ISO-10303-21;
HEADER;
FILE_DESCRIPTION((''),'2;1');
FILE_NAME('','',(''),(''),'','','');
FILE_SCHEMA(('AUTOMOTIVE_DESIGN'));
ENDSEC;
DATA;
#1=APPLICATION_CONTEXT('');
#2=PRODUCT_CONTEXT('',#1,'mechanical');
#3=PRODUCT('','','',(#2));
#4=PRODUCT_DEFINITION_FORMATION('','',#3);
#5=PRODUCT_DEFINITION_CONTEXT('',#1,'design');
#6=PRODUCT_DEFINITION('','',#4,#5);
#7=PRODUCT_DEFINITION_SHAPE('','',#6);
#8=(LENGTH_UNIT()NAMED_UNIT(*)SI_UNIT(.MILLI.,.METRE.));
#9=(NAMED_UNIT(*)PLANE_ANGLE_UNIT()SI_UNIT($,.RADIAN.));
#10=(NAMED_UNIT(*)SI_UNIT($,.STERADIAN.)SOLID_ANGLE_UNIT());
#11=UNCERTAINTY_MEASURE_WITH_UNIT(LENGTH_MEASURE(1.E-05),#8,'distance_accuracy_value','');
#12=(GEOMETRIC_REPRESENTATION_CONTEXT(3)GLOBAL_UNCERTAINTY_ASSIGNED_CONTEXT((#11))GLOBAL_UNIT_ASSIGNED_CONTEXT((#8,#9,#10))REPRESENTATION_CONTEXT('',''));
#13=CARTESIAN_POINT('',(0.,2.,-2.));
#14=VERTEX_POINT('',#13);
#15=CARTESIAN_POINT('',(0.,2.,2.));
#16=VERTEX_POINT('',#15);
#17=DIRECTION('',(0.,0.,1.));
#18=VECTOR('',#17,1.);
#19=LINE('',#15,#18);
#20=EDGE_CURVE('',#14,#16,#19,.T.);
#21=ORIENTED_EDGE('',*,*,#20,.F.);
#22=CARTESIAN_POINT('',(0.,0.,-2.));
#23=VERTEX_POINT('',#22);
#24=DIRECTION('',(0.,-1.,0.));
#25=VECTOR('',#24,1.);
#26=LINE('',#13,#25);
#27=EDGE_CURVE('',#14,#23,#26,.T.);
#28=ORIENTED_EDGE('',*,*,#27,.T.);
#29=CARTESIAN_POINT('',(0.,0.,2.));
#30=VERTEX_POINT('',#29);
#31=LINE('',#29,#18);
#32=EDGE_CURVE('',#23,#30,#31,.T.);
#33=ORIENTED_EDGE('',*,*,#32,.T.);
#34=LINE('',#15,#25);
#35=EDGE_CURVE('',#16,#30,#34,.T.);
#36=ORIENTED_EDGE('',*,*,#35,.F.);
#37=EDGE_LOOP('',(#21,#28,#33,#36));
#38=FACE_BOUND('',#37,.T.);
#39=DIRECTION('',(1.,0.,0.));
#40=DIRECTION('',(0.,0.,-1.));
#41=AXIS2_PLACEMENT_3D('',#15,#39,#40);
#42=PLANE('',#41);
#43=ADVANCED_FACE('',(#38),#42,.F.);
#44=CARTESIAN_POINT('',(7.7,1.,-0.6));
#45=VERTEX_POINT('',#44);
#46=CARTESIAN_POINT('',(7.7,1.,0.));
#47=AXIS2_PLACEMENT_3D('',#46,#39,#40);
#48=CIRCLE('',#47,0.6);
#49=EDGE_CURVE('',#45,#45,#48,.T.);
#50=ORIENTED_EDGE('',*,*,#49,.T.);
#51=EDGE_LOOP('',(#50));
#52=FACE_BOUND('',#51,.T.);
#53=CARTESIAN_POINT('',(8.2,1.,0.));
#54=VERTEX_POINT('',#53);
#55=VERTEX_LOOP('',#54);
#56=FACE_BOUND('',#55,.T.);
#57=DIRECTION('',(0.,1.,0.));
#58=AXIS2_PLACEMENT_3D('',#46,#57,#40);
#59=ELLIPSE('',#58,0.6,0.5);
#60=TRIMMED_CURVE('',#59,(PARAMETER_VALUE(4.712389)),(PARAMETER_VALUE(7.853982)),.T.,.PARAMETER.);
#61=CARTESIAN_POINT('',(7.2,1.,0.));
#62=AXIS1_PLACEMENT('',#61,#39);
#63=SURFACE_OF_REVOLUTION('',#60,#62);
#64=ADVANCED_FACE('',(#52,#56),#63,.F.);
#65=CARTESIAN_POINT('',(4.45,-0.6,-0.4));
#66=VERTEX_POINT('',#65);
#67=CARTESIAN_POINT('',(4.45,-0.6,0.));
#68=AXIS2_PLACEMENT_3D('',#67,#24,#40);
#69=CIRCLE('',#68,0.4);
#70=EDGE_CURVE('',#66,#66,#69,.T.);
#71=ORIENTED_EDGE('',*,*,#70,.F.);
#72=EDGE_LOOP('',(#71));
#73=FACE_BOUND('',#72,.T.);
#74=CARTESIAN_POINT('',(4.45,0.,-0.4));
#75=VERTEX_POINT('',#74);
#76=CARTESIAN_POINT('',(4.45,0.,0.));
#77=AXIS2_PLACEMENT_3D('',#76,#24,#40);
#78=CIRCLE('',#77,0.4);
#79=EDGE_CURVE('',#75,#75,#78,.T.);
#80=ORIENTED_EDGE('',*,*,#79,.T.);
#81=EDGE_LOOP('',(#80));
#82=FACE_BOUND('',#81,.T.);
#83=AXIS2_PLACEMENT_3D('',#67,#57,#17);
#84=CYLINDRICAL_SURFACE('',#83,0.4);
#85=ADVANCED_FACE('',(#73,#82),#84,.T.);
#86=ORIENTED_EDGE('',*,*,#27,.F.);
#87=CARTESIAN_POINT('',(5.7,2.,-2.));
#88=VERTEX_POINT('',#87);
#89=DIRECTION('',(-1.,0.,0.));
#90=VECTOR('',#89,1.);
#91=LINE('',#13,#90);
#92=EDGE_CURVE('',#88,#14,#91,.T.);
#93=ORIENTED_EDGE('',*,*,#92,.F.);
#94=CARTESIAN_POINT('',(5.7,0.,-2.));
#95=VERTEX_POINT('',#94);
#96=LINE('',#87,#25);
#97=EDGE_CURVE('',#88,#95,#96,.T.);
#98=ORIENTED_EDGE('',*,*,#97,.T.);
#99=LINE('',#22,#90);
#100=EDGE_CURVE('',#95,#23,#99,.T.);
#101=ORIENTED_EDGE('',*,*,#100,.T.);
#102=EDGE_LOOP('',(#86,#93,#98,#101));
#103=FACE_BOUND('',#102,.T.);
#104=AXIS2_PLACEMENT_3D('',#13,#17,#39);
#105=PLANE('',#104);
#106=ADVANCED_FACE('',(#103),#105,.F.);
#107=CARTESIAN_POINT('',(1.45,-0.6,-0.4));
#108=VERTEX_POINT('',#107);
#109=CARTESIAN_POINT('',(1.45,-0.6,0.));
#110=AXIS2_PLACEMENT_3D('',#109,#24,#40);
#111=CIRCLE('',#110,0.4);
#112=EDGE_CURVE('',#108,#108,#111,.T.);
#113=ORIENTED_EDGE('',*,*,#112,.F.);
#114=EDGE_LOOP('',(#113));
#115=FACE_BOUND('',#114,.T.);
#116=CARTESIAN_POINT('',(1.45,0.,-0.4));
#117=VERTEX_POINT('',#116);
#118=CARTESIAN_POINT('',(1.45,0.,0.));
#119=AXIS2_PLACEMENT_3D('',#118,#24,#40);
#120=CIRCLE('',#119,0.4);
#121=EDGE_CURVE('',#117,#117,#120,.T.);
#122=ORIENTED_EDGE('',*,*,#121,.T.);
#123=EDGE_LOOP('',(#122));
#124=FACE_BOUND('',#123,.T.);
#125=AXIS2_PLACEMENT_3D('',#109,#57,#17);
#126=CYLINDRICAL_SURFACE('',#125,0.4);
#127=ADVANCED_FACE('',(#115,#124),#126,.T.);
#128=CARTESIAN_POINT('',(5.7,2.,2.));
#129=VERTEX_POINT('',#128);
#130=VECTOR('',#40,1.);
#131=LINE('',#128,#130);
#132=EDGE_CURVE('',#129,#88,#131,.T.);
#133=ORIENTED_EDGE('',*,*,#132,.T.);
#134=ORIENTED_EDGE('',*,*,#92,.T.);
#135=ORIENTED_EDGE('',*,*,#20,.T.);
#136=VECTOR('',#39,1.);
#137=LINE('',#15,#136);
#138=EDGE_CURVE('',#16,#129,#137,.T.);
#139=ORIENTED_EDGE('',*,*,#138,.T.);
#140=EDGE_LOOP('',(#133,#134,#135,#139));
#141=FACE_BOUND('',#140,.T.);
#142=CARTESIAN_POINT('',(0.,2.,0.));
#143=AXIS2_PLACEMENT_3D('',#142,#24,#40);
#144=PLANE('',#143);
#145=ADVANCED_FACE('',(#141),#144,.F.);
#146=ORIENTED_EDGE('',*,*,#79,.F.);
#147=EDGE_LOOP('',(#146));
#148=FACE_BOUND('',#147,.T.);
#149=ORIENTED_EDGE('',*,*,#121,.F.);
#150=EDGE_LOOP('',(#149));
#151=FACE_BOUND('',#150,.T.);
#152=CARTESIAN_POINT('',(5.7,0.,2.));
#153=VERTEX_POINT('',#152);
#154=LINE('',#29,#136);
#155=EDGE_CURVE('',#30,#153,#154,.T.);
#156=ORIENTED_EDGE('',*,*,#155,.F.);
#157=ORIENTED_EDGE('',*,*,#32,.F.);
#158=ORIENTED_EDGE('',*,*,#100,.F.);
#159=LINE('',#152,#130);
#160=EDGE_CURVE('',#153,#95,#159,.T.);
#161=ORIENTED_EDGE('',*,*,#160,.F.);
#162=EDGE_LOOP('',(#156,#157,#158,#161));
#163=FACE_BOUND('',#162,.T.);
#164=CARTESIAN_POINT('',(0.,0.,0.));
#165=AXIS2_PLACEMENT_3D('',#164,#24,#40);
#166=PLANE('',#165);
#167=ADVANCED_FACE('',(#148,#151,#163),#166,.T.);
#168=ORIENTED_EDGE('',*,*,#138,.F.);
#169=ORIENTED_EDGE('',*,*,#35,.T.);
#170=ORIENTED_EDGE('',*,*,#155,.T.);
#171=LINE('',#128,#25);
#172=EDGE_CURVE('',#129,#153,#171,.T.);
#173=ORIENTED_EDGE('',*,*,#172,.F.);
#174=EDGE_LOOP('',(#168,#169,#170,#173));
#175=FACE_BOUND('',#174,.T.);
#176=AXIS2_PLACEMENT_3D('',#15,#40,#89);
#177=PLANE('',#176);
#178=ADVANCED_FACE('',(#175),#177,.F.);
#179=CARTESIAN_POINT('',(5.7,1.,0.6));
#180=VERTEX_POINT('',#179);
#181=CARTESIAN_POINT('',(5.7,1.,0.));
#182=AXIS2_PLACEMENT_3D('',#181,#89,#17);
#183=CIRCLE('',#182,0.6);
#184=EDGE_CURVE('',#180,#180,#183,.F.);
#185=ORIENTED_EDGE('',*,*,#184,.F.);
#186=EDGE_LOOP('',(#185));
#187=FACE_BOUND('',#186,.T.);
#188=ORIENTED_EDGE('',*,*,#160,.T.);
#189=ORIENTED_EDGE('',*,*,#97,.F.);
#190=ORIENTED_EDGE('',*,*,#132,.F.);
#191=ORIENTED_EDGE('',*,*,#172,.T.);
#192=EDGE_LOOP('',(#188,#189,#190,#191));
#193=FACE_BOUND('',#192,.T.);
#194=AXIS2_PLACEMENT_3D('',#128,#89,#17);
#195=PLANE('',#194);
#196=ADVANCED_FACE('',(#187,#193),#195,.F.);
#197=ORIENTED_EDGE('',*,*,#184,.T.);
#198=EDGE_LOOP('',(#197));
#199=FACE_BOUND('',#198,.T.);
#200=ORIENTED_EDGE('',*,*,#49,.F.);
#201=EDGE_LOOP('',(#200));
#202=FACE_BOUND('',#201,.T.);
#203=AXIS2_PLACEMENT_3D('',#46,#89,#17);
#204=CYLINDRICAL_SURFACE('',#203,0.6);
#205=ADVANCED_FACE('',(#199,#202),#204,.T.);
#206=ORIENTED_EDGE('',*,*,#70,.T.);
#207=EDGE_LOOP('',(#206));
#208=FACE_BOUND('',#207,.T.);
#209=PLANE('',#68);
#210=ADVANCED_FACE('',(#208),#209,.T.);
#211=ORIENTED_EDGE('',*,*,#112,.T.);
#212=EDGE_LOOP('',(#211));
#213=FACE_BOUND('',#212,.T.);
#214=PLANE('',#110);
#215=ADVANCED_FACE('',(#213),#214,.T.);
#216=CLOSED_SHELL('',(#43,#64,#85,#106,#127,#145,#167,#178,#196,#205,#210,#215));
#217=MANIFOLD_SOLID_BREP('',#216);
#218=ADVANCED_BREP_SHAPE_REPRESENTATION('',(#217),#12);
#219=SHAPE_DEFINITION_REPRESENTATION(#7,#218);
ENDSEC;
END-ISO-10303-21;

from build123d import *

# Parameters (mm, degrees)
SKETCH1_W           = 5.7
SKETCH1_H           = 4
BOSS_EXTRUDE1_DEPTH = 2
SKETCH2_R           = 0.6
BOSS_EXTRUDE2_DEPTH = 2
SKETCH3_R           = 0.4
BOSS_EXTRUDE3_DEPTH = 0.6


# Read off the part's stored shape, not the designer's step: Dome1
with BuildPart() as part:
    # Sketch1 → Boss-Extrude1 (new body)
    with BuildSketch(Plane(origin=(0, 0, 0), x_dir=(1, 0, 0), z_dir=(0, 1, 0))):
        with Locations((2.85, 0)):
            Rectangle(SKETCH1_W, SKETCH1_H)
    extrude(amount=BOSS_EXTRUDE1_DEPTH)

    # Sketch2 → Boss-Extrude2 (add)
    with BuildSketch(Plane(origin=(5.7, 0, 0), x_dir=(0, 0, -1), z_dir=(1, 0, 0))):
        with Locations(Location((0, 1, 0), (0, 0, 180))):
            Circle(SKETCH2_R)
    extrude(amount=BOSS_EXTRUDE2_DEPTH)

    # Dome1 outline → Dome1 (revolve)
    with BuildSketch(Plane(origin=(0, 1, 0), x_dir=(0, 1, 0), z_dir=(0, 0, -1))):
        with BuildLine():
            add(Edge.make_bspline(
                [(0, 8.2), (0.6, 8.2), (0.6, 7.7)],
                knots=[4.71238898, 4.71238898, 4.71238898, 6.283185307, 6.283185307, 6.283185307], degree=2, weights=[1, 0.707106781, 1]))
            Line((0, 8.2), (0, 7.7))
            Line((0, 7.7), (0.6, 7.7))
        make_face()
    revolve(axis=Axis((0, 1, 0), (1, 0, 0)))

    # Sketch3 → Boss-Extrude3 (add)
    with BuildSketch(Plane(origin=(0, 0, 0), x_dir=(-1, 0, 0), z_dir=(0, -1, 0))):
        with Locations(Location((-4.45, 0, 0), (0, 0, 90))):
            Circle(SKETCH3_R)
        with Locations(Location((-1.45, 0, 0), (0, 0, 90))):
            Circle(SKETCH3_R)
    extrude(amount=BOSS_EXTRUDE3_DEPTH)


solid = part.part
